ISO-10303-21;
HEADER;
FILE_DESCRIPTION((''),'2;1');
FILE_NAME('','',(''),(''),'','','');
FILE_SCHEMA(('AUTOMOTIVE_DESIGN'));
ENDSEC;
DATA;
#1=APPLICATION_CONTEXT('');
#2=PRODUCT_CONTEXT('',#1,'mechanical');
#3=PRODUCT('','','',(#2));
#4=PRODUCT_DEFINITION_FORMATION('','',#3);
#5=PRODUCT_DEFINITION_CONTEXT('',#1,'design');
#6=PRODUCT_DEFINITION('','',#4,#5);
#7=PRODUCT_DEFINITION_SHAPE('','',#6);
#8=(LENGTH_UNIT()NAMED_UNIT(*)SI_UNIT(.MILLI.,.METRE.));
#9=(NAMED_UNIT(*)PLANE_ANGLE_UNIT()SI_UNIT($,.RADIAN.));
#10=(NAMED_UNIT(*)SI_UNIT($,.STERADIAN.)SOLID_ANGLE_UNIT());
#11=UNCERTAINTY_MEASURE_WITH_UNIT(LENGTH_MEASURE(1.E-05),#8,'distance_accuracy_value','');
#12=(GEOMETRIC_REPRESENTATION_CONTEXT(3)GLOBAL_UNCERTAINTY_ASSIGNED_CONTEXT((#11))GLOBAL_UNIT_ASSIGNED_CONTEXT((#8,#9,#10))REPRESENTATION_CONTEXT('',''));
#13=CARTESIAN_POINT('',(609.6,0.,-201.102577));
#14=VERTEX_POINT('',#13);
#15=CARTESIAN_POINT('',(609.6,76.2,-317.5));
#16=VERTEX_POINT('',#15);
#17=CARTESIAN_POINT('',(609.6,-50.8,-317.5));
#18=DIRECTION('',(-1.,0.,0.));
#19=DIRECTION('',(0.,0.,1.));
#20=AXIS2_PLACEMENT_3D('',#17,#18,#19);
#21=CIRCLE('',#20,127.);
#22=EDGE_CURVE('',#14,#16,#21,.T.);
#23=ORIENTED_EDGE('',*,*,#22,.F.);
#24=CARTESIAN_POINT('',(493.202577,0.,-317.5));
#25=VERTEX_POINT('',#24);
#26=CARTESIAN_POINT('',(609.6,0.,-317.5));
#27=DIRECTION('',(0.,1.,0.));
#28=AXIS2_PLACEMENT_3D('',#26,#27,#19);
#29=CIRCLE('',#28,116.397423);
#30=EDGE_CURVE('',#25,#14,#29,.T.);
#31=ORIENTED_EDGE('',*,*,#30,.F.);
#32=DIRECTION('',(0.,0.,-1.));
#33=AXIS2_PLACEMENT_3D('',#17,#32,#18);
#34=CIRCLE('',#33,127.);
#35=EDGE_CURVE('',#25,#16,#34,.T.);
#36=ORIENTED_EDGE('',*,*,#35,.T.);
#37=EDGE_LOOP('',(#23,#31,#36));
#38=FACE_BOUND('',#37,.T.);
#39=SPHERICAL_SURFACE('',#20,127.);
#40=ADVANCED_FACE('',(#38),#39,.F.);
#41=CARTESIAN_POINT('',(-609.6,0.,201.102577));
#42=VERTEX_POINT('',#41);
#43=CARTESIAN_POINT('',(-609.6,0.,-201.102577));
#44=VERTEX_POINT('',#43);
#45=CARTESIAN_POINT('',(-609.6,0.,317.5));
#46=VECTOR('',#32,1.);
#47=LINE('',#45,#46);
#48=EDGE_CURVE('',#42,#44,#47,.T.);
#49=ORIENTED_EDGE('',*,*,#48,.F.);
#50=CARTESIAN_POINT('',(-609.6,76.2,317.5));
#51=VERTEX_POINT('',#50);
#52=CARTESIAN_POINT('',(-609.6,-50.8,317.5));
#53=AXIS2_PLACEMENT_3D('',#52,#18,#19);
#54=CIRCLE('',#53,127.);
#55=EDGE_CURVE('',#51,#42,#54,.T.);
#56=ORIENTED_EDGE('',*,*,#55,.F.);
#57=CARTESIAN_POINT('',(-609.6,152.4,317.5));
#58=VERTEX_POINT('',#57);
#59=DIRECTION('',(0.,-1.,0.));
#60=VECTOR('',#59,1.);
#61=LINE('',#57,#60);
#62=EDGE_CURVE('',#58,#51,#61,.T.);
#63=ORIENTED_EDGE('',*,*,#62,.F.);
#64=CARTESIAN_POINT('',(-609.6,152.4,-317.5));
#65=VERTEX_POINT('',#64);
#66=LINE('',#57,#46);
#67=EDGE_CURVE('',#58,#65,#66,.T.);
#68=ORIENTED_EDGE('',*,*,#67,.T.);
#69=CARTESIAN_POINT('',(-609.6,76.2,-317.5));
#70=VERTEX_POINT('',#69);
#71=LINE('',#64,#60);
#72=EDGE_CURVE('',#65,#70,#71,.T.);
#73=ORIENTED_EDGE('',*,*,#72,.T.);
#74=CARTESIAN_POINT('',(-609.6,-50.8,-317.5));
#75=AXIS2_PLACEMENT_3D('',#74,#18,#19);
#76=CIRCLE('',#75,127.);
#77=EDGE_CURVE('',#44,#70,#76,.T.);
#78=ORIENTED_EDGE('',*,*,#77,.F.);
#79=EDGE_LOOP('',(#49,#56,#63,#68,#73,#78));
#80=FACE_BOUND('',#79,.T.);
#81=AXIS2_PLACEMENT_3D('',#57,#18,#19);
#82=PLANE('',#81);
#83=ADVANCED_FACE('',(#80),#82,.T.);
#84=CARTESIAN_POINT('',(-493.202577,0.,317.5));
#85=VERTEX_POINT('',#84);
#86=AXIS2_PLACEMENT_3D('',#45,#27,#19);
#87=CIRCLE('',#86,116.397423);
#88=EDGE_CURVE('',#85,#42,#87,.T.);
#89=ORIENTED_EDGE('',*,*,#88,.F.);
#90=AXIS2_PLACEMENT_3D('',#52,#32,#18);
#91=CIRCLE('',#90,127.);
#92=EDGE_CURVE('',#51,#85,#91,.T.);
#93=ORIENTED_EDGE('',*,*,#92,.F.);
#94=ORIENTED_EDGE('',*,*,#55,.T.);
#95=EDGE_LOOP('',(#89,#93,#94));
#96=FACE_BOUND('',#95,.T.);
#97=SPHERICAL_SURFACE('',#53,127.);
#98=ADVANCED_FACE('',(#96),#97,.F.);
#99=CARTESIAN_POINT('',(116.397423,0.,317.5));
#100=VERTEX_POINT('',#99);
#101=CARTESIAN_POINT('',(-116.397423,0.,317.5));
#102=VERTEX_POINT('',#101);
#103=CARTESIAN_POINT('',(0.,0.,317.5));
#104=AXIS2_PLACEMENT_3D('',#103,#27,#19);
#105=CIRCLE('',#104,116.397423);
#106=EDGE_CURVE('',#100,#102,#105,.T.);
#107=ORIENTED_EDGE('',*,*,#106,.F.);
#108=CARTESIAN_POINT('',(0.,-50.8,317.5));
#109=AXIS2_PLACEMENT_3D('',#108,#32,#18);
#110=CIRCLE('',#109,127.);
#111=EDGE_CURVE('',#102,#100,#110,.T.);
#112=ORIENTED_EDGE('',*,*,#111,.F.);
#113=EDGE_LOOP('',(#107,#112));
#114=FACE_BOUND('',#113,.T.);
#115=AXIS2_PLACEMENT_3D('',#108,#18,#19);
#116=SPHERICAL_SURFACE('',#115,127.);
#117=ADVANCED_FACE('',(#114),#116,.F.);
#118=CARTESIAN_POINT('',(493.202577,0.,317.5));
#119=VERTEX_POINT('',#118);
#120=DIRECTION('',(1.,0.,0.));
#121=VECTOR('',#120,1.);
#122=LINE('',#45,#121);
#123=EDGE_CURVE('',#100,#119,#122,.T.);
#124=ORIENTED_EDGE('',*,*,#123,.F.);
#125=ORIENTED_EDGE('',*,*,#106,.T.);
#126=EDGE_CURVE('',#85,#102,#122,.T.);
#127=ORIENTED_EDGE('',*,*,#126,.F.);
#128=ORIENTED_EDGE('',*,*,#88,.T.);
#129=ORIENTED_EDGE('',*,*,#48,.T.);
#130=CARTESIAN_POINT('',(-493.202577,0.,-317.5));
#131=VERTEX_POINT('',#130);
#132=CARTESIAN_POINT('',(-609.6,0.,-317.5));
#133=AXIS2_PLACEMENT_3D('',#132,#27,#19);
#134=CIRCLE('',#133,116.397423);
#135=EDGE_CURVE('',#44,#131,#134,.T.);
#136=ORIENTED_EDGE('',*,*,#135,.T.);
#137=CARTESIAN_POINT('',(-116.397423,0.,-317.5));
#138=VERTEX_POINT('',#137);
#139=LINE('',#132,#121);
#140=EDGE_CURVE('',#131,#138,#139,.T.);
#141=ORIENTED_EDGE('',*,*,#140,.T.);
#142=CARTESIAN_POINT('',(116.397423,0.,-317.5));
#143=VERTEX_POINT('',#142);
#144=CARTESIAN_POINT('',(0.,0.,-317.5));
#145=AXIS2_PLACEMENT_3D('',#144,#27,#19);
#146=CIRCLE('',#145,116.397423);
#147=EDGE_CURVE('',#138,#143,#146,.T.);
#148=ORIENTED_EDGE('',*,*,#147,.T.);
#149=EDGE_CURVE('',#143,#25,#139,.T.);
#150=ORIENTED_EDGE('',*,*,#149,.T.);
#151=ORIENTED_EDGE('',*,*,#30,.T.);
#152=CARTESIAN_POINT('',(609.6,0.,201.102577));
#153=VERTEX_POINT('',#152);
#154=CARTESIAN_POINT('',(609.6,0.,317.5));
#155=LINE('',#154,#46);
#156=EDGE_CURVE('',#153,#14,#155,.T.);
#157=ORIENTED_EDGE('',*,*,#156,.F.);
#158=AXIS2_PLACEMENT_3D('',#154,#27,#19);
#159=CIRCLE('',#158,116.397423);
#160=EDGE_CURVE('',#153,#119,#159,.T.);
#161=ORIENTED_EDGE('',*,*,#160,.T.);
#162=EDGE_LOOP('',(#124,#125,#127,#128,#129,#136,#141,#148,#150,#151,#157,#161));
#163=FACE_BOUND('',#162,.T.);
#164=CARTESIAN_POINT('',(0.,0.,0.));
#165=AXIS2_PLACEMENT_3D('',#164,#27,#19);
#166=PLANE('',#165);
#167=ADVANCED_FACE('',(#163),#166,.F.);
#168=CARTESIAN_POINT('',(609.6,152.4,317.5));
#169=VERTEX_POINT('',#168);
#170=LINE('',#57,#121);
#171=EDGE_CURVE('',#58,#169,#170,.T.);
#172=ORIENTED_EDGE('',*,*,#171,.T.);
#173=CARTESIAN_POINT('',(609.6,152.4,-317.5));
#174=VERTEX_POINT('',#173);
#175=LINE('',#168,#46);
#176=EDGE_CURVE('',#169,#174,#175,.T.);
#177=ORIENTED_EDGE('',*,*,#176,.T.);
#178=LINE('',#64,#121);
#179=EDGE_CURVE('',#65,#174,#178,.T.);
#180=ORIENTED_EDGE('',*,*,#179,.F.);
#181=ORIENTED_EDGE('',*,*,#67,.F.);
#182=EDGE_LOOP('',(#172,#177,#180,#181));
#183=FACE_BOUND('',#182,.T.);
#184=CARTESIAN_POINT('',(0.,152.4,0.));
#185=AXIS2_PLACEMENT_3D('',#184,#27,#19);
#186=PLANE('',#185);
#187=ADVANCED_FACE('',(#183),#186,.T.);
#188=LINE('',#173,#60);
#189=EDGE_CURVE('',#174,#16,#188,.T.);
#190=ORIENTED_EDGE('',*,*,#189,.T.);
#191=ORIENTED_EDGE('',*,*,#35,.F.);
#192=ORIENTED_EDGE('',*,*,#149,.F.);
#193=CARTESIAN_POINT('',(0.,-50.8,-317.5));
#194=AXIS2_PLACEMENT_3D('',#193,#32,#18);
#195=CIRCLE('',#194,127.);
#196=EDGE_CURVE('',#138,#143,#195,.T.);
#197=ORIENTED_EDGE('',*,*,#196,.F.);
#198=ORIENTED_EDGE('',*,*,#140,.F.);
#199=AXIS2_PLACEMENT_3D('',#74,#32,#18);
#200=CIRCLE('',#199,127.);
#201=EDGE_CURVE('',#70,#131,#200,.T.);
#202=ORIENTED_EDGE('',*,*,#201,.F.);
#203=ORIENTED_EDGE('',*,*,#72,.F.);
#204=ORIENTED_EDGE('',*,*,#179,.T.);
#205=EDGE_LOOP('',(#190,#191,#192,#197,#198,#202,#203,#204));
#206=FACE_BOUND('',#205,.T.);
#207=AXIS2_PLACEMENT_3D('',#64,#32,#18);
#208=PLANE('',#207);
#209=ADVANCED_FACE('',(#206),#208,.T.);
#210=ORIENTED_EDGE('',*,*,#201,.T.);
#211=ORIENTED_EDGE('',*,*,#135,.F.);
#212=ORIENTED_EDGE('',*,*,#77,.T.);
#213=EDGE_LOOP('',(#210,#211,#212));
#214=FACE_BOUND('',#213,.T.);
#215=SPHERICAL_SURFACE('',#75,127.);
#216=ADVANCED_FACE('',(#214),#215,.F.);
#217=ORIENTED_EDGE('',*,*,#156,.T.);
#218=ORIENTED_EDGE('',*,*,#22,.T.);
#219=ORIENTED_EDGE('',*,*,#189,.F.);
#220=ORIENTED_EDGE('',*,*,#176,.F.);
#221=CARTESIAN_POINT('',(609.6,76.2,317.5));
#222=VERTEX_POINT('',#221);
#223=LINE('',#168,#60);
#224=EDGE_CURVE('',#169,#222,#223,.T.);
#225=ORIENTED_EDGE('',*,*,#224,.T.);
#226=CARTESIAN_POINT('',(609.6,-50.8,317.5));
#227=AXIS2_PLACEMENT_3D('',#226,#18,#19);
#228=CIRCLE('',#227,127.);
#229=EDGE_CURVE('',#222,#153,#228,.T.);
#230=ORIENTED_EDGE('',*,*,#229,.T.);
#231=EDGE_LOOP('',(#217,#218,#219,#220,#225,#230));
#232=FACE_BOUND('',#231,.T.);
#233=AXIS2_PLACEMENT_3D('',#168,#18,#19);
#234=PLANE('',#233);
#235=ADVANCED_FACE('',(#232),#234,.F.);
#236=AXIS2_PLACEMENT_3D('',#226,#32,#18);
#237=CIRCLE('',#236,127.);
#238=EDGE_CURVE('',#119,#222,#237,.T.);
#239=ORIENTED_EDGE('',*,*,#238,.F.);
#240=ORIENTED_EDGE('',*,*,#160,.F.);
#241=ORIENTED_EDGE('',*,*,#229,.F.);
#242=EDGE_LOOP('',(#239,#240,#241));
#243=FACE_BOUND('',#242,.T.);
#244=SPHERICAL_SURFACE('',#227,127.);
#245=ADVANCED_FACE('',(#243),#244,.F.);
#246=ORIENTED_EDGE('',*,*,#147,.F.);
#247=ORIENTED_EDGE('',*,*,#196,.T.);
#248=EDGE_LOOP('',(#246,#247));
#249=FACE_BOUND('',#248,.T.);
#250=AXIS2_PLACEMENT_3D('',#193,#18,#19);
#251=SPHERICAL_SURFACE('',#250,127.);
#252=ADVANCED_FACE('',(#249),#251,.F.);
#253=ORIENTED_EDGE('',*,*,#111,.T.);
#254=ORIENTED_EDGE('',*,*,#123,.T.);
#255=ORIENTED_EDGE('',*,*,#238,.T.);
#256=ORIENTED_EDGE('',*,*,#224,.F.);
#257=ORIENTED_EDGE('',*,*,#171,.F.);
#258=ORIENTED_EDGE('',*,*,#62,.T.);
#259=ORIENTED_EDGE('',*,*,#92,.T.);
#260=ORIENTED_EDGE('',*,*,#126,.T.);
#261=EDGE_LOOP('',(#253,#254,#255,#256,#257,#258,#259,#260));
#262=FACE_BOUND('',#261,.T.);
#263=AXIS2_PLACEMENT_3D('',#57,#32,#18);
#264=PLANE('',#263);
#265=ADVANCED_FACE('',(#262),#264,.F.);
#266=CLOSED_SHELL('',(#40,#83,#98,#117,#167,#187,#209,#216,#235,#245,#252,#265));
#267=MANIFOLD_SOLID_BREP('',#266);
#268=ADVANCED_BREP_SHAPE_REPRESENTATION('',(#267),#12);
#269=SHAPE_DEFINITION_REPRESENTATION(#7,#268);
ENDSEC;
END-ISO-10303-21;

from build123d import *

# Parameters (mm, degrees)
SKETCH1_W           = 1219.2
SKETCH1_H           = 635
BOSS_EXTRUDE1_DEPTH = 152.4
LPATTERN3_COUNT     = 3
LPATTERN3_PITCH     = 609.6
LPATTERN3_2_COUNT   = 2
LPATTERN3_2_PITCH   = 635


with BuildPart() as part:
    # Sketch1 → Boss-Extrude1 (new body)
    with BuildSketch(Plane(origin=(0, 0, 0), x_dir=(1, 0, 0), z_dir=(0, 1, 0))):
        Rectangle(SKETCH1_W, SKETCH1_H)
    extrude(amount=BOSS_EXTRUDE1_DEPTH)


with BuildPart() as body_2:
    # Sketch3 → Revolve1 (revolve)
    with BuildSketch(Plane(origin=(0, -50.8, 0), x_dir=(-1, 0, 0), z_dir=(0, -1, 0))):
        with BuildLine():
            Line((-736.6, 317.5), (-482.6, 317.5))
            ThreePointArc((-482.6, 317.5), (-609.6, 444.5), (-736.6, 317.5))
        make_face()
    revolve(axis=Axis((-609.6, -50.8, -317.5), (1, 0, 0)))


with BuildPart() as lpattern3_1:
    # LPattern3: pattern copy
    add(body_2.part.moved(Location(Vector(-1, 0, 0) * (1 * LPATTERN3_PITCH))))


with BuildPart() as lpattern3_2:
    # LPattern3: pattern copy
    add(body_2.part.moved(Location(Vector(-1, 0, 0) * (2 * LPATTERN3_PITCH))))


with BuildPart() as lpattern3_2_1:
    # LPattern3 2: pattern copy
    add(body_2.part.moved(Location(Vector(0, 0, 1) * (1 * LPATTERN3_2_PITCH))))


with BuildPart() as lpattern3_2_2:
    # LPattern3 2: pattern copy
    add(lpattern3_1.part.moved(Location(Vector(0, 0, 1) * (1 * LPATTERN3_2_PITCH))))


with BuildPart() as lpattern3_2_3:
    # LPattern3 2: pattern copy
    add(lpattern3_2.part.moved(Location(Vector(0, 0, 1) * (1 * LPATTERN3_2_PITCH))))


with BuildPart() as part_1:
    add(part.part)

    # Intersect1: read off the stored shape, not the designer's step
    # Intersect1: cut body 2, LPattern3_1, LPattern3_2, LPattern3 2_1, LPattern3 2_2, LPattern3 2_3
    add(body_2.part, mode=Mode.SUBTRACT)
    add(lpattern3_1.part, mode=Mode.SUBTRACT)
    add(lpattern3_2.part, mode=Mode.SUBTRACT)
    add(lpattern3_2_1.part, mode=Mode.SUBTRACT)
    add(lpattern3_2_2.part, mode=Mode.SUBTRACT)
    add(lpattern3_2_3.part, mode=Mode.SUBTRACT)


solid = part_1.part
